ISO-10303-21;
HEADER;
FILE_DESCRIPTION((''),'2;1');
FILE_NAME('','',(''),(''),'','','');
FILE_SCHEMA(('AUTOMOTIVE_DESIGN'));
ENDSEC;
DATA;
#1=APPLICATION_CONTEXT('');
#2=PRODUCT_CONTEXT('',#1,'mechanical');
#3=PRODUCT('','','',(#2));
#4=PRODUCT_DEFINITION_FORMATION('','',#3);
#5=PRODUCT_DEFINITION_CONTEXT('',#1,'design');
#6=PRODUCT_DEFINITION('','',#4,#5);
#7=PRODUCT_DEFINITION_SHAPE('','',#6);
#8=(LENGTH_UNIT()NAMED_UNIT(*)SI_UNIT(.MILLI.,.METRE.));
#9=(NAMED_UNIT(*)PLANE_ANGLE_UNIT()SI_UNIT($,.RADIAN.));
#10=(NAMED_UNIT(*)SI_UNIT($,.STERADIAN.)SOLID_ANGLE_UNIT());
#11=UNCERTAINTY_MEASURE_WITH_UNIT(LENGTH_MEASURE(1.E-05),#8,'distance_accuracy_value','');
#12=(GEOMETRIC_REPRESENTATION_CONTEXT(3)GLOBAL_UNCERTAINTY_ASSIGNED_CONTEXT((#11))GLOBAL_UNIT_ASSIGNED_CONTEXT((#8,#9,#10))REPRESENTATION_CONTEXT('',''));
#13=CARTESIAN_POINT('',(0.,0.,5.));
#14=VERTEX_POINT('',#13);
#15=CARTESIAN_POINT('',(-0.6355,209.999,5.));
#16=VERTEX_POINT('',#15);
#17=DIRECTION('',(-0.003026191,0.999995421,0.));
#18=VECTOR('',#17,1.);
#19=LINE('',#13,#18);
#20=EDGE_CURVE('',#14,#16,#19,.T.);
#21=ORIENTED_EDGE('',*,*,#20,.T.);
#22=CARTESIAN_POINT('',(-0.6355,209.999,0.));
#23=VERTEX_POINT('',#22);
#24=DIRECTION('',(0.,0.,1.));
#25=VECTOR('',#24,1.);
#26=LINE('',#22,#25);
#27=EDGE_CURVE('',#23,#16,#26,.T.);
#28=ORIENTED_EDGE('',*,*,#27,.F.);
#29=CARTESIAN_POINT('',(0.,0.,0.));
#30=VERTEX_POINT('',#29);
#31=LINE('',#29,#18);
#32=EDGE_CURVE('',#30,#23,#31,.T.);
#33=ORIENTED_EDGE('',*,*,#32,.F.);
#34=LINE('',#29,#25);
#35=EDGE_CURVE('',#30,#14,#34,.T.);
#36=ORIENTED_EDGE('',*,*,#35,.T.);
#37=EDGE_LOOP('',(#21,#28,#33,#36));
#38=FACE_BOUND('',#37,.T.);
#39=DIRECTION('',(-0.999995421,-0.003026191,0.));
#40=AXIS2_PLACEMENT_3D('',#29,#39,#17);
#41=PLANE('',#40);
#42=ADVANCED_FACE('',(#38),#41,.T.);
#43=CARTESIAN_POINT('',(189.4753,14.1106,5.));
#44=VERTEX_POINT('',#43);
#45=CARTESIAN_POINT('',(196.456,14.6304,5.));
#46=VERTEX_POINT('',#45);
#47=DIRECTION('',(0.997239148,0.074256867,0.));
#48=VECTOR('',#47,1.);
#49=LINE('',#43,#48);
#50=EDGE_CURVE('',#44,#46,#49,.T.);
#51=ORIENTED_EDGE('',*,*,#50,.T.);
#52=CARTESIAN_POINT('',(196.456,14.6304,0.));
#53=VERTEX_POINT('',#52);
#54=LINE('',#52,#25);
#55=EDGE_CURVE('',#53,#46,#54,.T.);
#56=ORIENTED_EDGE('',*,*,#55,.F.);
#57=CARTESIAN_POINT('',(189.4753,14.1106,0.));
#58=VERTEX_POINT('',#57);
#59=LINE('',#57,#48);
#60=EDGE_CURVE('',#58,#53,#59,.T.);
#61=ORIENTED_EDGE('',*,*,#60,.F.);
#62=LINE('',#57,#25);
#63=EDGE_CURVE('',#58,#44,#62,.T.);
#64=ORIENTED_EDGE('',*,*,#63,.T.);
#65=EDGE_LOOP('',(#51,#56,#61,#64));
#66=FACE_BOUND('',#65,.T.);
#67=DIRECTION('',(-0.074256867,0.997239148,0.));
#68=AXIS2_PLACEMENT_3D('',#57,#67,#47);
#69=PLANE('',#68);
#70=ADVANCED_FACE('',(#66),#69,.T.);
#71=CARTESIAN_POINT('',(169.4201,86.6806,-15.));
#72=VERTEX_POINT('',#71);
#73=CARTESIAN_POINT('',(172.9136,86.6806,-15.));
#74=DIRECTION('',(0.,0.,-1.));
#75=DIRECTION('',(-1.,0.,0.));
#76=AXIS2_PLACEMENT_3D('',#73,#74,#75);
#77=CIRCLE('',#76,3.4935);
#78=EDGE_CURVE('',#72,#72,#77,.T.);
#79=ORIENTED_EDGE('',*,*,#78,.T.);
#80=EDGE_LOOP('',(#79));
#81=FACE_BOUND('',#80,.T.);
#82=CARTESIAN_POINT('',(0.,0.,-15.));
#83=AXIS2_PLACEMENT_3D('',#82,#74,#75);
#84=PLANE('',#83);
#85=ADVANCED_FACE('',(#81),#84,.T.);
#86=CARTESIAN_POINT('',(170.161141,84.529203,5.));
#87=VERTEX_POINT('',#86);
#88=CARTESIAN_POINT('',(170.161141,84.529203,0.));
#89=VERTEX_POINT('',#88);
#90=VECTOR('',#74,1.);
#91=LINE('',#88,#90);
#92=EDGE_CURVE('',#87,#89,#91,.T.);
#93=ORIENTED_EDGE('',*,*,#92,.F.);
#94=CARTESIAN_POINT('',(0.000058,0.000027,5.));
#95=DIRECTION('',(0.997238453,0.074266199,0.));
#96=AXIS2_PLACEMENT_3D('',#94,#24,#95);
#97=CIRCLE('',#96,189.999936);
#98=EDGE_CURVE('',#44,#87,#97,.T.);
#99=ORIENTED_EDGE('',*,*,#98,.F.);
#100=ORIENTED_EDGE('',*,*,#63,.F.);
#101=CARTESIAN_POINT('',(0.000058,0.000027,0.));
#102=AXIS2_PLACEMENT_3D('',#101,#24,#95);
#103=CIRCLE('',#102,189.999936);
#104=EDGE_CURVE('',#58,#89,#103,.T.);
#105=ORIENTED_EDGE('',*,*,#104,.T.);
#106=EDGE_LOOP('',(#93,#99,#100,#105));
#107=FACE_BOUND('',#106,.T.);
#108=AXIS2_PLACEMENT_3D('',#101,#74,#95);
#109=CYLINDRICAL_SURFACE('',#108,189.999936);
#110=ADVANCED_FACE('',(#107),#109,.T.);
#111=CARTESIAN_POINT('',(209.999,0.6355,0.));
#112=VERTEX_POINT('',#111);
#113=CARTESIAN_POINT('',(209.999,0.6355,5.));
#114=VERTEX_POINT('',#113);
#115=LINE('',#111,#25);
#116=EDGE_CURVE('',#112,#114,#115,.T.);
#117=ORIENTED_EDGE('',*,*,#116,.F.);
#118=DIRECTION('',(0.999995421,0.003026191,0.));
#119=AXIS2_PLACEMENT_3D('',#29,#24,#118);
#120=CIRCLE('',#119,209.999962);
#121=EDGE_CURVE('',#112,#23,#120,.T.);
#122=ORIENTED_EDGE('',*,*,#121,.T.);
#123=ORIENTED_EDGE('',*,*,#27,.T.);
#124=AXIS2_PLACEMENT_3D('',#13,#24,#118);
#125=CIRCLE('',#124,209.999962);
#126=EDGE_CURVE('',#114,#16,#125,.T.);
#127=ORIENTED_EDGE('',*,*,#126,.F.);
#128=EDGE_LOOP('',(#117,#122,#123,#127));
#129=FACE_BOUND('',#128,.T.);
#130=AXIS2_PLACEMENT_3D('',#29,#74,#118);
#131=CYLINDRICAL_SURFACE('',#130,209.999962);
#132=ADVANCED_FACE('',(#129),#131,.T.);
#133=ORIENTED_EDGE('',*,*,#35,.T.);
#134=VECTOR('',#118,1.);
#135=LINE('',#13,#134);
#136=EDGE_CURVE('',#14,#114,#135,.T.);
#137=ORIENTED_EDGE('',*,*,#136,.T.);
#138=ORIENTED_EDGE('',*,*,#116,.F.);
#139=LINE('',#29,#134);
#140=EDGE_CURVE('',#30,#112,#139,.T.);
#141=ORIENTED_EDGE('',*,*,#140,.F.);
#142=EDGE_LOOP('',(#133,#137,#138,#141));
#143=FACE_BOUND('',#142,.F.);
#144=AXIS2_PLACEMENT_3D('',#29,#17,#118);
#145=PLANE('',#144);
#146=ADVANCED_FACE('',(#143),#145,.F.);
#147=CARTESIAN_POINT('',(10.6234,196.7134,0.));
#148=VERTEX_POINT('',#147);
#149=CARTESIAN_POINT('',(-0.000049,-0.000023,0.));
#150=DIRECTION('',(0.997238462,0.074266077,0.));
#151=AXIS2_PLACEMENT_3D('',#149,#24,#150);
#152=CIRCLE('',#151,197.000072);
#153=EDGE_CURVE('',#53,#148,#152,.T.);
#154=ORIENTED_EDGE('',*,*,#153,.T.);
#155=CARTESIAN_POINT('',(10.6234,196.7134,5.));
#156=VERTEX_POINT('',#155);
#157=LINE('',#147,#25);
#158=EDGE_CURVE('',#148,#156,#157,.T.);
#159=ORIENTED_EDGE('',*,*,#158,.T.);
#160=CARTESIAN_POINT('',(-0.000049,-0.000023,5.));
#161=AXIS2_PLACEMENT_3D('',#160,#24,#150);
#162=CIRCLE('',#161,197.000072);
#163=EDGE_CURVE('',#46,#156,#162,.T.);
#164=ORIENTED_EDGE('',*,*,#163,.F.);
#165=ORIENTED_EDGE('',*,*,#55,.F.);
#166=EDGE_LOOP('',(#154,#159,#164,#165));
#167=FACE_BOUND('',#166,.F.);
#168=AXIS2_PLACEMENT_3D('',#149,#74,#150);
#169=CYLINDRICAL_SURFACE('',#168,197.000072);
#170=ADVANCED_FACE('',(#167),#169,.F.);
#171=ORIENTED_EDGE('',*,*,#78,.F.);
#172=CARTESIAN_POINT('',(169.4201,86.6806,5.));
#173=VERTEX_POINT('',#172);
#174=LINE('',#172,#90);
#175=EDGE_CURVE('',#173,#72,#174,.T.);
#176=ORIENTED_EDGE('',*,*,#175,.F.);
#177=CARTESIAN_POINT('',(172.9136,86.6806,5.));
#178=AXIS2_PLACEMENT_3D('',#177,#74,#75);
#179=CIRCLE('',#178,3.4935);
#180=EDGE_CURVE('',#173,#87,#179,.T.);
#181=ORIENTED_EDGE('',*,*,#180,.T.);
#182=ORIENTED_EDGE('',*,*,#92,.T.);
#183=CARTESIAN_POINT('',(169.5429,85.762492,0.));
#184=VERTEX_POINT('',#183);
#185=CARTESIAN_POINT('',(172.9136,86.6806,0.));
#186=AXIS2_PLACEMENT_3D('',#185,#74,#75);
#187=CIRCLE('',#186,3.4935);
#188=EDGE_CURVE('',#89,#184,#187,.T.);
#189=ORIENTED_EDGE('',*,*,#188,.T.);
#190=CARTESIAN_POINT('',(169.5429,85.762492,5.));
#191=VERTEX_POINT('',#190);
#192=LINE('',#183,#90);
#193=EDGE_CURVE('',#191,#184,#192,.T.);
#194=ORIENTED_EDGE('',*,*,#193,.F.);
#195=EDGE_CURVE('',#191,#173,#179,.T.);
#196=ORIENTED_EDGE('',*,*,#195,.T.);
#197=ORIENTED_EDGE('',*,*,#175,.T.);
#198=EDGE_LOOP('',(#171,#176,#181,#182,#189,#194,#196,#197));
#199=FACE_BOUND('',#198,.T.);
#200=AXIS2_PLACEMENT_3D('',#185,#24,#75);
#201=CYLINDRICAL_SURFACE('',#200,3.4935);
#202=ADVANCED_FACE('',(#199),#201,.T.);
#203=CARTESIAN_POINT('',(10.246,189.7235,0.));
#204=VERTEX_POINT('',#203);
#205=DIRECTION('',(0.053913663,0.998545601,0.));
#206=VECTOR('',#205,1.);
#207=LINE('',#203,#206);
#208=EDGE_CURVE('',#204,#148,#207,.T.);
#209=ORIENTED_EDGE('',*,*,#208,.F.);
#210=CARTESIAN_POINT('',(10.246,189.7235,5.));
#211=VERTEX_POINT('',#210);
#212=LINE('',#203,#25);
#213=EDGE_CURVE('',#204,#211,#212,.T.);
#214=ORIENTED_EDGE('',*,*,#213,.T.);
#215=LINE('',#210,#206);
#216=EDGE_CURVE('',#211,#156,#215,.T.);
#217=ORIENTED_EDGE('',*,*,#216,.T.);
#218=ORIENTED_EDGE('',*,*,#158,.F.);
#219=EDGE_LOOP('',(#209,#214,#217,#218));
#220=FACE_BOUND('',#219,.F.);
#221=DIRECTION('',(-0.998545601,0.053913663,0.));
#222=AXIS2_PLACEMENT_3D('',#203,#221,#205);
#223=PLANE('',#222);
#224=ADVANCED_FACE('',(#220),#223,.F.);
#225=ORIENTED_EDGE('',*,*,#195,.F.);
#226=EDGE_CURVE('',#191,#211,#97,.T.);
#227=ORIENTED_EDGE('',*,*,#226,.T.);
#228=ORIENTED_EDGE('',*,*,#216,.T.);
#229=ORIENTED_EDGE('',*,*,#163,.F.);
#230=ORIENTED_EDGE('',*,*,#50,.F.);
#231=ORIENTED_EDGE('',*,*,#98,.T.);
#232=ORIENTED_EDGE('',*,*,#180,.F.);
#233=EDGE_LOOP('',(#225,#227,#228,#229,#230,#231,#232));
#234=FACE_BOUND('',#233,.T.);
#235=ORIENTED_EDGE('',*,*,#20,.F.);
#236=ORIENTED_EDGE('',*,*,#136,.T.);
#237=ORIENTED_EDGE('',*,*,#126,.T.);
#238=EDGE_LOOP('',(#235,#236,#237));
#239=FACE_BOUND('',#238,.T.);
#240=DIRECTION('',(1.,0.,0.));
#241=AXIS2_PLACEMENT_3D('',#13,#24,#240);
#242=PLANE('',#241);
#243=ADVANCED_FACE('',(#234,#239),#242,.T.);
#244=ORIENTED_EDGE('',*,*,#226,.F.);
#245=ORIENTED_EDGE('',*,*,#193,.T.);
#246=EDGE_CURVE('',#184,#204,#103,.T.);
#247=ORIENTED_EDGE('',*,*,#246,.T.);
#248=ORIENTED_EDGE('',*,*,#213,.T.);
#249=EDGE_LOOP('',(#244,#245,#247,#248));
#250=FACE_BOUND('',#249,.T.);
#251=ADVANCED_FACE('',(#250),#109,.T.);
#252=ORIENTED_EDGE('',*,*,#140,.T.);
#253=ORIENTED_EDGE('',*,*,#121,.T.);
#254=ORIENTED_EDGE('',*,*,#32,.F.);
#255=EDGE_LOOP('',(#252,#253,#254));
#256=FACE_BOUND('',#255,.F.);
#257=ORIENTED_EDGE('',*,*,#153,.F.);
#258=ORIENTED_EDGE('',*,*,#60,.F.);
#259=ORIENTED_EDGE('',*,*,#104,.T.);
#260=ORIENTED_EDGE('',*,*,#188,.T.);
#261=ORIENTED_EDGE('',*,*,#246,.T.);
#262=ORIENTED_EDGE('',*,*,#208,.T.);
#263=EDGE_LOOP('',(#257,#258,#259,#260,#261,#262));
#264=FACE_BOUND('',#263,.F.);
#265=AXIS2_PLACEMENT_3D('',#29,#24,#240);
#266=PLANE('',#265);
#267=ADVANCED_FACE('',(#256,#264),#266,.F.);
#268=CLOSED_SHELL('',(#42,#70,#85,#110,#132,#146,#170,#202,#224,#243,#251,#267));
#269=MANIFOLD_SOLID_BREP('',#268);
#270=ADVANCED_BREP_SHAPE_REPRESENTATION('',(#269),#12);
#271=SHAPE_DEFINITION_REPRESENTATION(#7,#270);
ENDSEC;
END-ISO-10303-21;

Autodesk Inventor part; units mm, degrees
ref_plane "YZ Plane" through (0, 0, 0) normal (1, 0, 0) x (0, 1, 0)
ref_plane "XZ Plane" through (0, 0, 0) normal (0, 1, 0) x (-1, 0, 0)
ref_plane "XY Plane" through (0, 0, 0) normal (0, 0, 1) x (1, 0, 0)
sketch "Esboço1" plane through (0, 0, 0) normal (0, 0, 1) x (1, 0, 0)
  arc A0 (189.4753, 14.1106) -> (10.246, 189.7235) centre (0, 0) ccw
  line L0 (0, 0) -> (-0.575, 189.9991) construction
  line L1 (0, 0) -> (189.9991, 0.575) construction
  arc A1 (196.456, 14.6304) -> (10.6234, 196.7134) centre (0, 0) ccw
  arc A2 (209.999, 0.6355) -> (-0.6355, 209.999) centre (0, 0) ccw
  line L2 (0, 0) -> (-0.6355, 209.999)
  line L3 (0, 0) -> (209.999, 0.6355)
  line L4 (10.246, 189.7235) -> (10.6234, 196.7134)
  line L5 (189.4753, 14.1106) -> (196.456, 14.6304)
  dimension "d3" = 190
  dimension "d4" = 90
  dimension "d5" = 197
  dimension "d6" = 210
extrude "Extrusão1" add sketch "Esboço1" along normal blind 5
sketch "Esboço2" plane through (0, 0, 0) normal (0, 0, -1) x (-1, 0, 0)
  line L0 (0.6355, 209.999) -> (0, 0) projected
  circle A0 centre (-172.9136, 86.6806) radius 3.4935
extrude "Extrusão2" add sketch "Esboço2" along normal blind 20 and the other way blind 5
thread "Rosca1" size "M7x1" class "6g" standard "ANSI Metric M Profile" full length
move faces "Mover1" translate (0, 0, 5) faces at (171.993, 86.7732, -20)
properties part number "arco base"
